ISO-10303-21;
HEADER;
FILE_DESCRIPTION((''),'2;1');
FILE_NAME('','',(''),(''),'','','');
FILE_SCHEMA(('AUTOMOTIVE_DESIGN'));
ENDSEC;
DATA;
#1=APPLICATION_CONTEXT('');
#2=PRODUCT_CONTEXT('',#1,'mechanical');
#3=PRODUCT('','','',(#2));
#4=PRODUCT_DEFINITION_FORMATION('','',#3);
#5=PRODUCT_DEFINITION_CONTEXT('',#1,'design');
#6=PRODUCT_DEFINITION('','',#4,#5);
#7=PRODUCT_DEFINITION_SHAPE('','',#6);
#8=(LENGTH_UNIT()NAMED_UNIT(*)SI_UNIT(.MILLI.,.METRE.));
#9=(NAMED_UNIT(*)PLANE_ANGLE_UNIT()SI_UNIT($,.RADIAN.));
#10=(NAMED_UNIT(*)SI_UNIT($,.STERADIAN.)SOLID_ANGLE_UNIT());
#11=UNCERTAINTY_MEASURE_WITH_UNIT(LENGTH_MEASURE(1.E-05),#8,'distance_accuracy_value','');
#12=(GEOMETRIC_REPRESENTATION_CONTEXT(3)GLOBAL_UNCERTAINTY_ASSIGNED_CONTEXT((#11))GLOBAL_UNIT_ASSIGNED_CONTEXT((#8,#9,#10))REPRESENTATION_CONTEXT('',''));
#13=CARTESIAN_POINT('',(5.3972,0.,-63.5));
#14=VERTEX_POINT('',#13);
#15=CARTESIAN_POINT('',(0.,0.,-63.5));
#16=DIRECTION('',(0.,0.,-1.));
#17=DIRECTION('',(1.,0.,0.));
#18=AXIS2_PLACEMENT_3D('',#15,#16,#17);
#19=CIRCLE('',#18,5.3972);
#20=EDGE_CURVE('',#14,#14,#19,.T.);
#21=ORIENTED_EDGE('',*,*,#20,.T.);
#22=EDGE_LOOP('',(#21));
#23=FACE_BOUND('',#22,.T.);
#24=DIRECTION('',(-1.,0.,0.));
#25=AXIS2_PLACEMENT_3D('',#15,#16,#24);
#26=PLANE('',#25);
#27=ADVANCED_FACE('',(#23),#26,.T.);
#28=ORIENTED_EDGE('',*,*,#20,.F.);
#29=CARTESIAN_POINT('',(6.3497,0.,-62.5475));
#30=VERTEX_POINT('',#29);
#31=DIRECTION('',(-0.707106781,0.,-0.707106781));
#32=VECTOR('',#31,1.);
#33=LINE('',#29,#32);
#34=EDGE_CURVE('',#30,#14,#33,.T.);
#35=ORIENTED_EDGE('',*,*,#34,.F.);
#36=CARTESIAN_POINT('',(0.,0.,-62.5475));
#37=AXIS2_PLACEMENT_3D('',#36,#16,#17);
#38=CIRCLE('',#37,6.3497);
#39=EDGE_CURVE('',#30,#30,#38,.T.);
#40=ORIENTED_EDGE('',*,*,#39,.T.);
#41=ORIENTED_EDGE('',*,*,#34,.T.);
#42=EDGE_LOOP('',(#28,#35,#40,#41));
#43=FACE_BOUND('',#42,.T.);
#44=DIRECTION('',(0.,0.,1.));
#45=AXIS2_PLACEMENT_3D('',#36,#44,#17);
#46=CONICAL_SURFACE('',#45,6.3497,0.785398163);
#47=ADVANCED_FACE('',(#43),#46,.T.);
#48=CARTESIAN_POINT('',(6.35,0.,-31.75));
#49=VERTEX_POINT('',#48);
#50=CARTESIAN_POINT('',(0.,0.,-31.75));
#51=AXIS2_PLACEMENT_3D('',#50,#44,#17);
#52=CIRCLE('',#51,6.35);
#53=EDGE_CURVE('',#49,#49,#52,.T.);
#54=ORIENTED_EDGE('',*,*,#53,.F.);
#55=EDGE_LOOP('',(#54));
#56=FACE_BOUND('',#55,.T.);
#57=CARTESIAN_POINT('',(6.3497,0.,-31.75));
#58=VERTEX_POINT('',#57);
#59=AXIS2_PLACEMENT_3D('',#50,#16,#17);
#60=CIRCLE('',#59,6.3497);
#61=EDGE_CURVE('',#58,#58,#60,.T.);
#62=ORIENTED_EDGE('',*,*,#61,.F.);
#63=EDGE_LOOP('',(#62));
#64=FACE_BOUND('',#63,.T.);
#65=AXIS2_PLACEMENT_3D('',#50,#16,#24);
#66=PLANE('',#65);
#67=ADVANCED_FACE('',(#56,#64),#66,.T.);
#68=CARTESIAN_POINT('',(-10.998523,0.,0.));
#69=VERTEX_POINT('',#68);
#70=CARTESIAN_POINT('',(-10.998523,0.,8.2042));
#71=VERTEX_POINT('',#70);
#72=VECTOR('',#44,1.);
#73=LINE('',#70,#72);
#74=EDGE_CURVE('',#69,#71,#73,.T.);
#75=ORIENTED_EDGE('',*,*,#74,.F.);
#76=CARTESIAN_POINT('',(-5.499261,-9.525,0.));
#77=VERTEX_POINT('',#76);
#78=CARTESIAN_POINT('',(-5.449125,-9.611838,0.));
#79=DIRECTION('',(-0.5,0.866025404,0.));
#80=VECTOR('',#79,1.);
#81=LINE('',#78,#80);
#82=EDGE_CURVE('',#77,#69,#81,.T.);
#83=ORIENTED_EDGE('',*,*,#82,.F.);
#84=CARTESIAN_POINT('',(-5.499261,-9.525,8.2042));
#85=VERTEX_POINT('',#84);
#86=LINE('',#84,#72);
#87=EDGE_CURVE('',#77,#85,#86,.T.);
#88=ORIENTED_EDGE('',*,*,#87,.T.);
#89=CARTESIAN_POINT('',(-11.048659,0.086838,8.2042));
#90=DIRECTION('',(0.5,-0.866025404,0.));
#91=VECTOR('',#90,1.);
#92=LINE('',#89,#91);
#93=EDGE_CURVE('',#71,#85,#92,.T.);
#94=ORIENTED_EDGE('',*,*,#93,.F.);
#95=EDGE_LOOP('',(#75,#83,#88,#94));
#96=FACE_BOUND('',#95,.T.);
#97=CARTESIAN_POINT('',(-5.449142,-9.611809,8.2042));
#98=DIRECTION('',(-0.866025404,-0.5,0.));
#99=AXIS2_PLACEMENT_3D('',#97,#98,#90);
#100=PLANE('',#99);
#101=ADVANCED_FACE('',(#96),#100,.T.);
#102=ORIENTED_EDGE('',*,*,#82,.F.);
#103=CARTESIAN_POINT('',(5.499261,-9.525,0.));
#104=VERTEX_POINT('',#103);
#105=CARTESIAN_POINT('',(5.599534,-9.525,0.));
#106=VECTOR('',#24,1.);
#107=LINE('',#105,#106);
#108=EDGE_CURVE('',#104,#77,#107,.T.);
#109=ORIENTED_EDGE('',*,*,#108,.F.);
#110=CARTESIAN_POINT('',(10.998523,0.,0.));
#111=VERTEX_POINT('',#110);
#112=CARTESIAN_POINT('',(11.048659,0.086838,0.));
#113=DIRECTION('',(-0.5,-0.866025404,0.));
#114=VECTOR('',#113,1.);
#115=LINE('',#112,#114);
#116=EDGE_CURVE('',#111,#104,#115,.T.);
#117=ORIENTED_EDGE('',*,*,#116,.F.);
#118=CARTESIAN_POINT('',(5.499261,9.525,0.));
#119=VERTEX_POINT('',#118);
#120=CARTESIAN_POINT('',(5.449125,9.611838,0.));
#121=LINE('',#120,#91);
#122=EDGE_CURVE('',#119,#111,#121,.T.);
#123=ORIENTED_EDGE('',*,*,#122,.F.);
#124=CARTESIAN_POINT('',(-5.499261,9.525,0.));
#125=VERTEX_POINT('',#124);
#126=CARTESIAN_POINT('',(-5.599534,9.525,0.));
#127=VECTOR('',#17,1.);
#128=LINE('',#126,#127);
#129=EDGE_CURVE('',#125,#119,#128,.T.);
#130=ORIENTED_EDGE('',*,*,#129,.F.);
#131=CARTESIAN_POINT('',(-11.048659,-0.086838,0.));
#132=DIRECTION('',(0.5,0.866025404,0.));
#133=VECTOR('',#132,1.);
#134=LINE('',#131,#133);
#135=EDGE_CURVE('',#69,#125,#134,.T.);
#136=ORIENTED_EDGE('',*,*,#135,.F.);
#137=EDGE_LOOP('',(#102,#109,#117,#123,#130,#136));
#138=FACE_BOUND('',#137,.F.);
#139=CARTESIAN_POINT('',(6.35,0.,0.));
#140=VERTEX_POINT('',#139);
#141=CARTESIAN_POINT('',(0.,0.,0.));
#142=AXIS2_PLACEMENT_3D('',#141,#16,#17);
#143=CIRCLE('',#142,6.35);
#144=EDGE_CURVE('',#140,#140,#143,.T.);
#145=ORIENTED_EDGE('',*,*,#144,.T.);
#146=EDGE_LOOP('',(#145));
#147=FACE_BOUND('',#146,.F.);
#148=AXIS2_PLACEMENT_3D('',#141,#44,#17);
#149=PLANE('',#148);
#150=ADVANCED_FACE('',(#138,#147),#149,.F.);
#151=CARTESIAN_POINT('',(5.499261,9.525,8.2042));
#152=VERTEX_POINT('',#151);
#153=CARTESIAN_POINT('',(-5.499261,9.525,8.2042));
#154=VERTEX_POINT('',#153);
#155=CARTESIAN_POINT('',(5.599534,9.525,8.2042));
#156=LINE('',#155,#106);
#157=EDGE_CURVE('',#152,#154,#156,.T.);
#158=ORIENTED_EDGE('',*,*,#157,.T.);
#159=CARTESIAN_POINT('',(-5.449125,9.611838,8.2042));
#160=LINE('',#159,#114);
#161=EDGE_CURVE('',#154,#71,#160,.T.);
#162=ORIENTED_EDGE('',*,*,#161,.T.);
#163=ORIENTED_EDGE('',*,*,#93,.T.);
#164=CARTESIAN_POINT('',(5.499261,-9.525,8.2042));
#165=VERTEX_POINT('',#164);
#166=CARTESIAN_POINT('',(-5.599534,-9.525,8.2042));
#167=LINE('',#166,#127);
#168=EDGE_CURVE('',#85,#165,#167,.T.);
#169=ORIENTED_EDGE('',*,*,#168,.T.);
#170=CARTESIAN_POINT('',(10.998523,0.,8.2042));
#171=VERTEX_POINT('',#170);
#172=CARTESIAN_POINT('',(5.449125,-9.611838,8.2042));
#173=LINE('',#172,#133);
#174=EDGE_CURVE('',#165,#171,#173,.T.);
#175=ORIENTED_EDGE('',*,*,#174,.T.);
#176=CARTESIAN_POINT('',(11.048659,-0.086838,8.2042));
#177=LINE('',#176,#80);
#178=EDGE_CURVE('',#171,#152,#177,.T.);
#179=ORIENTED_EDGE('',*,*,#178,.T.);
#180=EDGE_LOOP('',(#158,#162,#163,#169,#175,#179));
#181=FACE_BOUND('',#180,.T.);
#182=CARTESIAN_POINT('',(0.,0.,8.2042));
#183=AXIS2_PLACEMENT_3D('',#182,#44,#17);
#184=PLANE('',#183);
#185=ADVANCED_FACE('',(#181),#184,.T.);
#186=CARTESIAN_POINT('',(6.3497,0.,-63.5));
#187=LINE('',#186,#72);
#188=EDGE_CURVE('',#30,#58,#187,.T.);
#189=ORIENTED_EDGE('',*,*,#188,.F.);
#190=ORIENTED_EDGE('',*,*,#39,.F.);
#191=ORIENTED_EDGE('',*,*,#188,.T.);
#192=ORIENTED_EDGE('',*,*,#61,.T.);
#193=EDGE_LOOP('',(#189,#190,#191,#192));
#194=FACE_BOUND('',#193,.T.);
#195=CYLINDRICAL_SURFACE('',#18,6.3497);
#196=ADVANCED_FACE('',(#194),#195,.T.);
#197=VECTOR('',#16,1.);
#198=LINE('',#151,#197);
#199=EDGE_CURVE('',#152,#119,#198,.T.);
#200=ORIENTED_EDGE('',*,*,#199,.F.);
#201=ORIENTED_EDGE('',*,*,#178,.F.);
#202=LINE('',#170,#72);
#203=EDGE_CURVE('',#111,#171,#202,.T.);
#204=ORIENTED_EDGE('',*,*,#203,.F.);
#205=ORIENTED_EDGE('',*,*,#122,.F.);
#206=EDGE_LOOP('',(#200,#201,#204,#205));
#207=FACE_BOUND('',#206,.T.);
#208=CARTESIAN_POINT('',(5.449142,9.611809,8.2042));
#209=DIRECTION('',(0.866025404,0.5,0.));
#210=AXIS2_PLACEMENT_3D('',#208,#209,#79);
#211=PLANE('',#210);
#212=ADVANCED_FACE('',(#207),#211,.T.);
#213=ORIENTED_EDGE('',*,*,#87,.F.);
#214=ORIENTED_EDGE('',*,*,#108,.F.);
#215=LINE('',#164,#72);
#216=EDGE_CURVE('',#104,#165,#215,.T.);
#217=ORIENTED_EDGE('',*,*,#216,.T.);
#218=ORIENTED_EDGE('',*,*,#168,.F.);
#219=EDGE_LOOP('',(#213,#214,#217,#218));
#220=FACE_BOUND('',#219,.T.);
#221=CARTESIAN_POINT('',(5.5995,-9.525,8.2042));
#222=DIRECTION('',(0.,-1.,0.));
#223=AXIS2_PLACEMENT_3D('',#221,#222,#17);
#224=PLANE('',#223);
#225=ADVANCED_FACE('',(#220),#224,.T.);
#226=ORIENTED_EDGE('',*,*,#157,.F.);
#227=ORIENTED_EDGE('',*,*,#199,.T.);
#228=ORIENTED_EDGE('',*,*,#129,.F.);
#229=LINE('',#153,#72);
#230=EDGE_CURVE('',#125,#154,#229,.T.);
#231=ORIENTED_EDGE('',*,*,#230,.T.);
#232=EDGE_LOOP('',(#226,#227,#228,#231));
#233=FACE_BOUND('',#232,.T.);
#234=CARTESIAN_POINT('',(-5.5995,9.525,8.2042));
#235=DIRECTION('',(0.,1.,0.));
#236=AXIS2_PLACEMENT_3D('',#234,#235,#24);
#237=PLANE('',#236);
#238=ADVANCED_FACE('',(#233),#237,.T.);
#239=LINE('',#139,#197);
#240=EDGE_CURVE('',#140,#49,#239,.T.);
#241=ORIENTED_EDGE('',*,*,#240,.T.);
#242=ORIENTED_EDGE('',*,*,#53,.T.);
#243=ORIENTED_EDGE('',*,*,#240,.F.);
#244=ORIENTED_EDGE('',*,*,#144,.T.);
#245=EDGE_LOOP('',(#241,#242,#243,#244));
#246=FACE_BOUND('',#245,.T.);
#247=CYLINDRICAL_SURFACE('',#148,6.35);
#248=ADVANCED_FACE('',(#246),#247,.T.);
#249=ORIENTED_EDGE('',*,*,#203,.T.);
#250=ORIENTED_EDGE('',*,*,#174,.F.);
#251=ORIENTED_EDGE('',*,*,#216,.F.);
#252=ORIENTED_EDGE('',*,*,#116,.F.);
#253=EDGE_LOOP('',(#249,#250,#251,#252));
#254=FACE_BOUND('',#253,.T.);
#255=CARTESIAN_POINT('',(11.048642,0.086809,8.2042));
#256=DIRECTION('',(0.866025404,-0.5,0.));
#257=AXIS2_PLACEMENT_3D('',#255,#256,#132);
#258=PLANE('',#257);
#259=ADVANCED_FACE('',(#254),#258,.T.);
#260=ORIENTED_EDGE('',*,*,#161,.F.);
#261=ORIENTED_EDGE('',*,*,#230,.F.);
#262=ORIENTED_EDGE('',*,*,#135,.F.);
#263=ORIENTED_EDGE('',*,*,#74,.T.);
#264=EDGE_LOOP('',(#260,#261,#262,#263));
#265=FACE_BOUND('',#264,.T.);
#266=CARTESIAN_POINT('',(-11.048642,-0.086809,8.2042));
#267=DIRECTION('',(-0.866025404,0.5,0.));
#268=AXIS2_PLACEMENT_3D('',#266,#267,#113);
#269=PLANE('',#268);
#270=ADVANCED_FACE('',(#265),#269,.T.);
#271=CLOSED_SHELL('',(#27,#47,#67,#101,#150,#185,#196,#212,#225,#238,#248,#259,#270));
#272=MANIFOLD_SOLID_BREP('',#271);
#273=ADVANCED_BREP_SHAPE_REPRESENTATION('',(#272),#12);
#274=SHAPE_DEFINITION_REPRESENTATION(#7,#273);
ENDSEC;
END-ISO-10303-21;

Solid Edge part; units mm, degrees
sketch "Sketch1" plane through (0, 0, 0) normal (0, 0, 1) x (1, 0, 0)
  circle A0 centre (0, 0) radius 11.049
  dimension "D1" = 22.098
extrude "Protrusion1" add sketch "Sketch1" along normal blind 8.2042
sketch "Sketch2" plane through (0, 0, 0) normal (0, 0, -1) x (1, 0, 0)
  circle A0 centre (0, 0) radius 6.35
extrude "Protrusion2" add sketch "Sketch2" along normal blind 63.5
sketch "Sketch3" plane through (0, 0, -63.5) normal (0, 0, -1) x (1, 0, 0)
  circle A0 centre (0, 0) radius 6.3497
extrude "Cutout1" cut sketch "Sketch3" against normal blind 31.75 flip side to cut
chamfer "Chamfer_1" distance 0.9525 angle 45 1 edges at (-6.3497, 0, -63.5)
sketch "Sketch4" plane through (0, 0, 8.2042) normal (0, 0, 1) x (1, 0, 0)
  line L0 (-5.5995, 9.525) -> (5.5995, 9.525)
  dimension "D1" = 19.05
extrude "Cutout2" cut sketch "Sketch4" against normal up to next material side at (0, 9.575, 8.2042)
pattern_circular "Pattern1" count 6 over 360 about axis through (0, 0, 8.2042) along (0, 0, 1) of "Cutout2"
properties part number "24103042"
